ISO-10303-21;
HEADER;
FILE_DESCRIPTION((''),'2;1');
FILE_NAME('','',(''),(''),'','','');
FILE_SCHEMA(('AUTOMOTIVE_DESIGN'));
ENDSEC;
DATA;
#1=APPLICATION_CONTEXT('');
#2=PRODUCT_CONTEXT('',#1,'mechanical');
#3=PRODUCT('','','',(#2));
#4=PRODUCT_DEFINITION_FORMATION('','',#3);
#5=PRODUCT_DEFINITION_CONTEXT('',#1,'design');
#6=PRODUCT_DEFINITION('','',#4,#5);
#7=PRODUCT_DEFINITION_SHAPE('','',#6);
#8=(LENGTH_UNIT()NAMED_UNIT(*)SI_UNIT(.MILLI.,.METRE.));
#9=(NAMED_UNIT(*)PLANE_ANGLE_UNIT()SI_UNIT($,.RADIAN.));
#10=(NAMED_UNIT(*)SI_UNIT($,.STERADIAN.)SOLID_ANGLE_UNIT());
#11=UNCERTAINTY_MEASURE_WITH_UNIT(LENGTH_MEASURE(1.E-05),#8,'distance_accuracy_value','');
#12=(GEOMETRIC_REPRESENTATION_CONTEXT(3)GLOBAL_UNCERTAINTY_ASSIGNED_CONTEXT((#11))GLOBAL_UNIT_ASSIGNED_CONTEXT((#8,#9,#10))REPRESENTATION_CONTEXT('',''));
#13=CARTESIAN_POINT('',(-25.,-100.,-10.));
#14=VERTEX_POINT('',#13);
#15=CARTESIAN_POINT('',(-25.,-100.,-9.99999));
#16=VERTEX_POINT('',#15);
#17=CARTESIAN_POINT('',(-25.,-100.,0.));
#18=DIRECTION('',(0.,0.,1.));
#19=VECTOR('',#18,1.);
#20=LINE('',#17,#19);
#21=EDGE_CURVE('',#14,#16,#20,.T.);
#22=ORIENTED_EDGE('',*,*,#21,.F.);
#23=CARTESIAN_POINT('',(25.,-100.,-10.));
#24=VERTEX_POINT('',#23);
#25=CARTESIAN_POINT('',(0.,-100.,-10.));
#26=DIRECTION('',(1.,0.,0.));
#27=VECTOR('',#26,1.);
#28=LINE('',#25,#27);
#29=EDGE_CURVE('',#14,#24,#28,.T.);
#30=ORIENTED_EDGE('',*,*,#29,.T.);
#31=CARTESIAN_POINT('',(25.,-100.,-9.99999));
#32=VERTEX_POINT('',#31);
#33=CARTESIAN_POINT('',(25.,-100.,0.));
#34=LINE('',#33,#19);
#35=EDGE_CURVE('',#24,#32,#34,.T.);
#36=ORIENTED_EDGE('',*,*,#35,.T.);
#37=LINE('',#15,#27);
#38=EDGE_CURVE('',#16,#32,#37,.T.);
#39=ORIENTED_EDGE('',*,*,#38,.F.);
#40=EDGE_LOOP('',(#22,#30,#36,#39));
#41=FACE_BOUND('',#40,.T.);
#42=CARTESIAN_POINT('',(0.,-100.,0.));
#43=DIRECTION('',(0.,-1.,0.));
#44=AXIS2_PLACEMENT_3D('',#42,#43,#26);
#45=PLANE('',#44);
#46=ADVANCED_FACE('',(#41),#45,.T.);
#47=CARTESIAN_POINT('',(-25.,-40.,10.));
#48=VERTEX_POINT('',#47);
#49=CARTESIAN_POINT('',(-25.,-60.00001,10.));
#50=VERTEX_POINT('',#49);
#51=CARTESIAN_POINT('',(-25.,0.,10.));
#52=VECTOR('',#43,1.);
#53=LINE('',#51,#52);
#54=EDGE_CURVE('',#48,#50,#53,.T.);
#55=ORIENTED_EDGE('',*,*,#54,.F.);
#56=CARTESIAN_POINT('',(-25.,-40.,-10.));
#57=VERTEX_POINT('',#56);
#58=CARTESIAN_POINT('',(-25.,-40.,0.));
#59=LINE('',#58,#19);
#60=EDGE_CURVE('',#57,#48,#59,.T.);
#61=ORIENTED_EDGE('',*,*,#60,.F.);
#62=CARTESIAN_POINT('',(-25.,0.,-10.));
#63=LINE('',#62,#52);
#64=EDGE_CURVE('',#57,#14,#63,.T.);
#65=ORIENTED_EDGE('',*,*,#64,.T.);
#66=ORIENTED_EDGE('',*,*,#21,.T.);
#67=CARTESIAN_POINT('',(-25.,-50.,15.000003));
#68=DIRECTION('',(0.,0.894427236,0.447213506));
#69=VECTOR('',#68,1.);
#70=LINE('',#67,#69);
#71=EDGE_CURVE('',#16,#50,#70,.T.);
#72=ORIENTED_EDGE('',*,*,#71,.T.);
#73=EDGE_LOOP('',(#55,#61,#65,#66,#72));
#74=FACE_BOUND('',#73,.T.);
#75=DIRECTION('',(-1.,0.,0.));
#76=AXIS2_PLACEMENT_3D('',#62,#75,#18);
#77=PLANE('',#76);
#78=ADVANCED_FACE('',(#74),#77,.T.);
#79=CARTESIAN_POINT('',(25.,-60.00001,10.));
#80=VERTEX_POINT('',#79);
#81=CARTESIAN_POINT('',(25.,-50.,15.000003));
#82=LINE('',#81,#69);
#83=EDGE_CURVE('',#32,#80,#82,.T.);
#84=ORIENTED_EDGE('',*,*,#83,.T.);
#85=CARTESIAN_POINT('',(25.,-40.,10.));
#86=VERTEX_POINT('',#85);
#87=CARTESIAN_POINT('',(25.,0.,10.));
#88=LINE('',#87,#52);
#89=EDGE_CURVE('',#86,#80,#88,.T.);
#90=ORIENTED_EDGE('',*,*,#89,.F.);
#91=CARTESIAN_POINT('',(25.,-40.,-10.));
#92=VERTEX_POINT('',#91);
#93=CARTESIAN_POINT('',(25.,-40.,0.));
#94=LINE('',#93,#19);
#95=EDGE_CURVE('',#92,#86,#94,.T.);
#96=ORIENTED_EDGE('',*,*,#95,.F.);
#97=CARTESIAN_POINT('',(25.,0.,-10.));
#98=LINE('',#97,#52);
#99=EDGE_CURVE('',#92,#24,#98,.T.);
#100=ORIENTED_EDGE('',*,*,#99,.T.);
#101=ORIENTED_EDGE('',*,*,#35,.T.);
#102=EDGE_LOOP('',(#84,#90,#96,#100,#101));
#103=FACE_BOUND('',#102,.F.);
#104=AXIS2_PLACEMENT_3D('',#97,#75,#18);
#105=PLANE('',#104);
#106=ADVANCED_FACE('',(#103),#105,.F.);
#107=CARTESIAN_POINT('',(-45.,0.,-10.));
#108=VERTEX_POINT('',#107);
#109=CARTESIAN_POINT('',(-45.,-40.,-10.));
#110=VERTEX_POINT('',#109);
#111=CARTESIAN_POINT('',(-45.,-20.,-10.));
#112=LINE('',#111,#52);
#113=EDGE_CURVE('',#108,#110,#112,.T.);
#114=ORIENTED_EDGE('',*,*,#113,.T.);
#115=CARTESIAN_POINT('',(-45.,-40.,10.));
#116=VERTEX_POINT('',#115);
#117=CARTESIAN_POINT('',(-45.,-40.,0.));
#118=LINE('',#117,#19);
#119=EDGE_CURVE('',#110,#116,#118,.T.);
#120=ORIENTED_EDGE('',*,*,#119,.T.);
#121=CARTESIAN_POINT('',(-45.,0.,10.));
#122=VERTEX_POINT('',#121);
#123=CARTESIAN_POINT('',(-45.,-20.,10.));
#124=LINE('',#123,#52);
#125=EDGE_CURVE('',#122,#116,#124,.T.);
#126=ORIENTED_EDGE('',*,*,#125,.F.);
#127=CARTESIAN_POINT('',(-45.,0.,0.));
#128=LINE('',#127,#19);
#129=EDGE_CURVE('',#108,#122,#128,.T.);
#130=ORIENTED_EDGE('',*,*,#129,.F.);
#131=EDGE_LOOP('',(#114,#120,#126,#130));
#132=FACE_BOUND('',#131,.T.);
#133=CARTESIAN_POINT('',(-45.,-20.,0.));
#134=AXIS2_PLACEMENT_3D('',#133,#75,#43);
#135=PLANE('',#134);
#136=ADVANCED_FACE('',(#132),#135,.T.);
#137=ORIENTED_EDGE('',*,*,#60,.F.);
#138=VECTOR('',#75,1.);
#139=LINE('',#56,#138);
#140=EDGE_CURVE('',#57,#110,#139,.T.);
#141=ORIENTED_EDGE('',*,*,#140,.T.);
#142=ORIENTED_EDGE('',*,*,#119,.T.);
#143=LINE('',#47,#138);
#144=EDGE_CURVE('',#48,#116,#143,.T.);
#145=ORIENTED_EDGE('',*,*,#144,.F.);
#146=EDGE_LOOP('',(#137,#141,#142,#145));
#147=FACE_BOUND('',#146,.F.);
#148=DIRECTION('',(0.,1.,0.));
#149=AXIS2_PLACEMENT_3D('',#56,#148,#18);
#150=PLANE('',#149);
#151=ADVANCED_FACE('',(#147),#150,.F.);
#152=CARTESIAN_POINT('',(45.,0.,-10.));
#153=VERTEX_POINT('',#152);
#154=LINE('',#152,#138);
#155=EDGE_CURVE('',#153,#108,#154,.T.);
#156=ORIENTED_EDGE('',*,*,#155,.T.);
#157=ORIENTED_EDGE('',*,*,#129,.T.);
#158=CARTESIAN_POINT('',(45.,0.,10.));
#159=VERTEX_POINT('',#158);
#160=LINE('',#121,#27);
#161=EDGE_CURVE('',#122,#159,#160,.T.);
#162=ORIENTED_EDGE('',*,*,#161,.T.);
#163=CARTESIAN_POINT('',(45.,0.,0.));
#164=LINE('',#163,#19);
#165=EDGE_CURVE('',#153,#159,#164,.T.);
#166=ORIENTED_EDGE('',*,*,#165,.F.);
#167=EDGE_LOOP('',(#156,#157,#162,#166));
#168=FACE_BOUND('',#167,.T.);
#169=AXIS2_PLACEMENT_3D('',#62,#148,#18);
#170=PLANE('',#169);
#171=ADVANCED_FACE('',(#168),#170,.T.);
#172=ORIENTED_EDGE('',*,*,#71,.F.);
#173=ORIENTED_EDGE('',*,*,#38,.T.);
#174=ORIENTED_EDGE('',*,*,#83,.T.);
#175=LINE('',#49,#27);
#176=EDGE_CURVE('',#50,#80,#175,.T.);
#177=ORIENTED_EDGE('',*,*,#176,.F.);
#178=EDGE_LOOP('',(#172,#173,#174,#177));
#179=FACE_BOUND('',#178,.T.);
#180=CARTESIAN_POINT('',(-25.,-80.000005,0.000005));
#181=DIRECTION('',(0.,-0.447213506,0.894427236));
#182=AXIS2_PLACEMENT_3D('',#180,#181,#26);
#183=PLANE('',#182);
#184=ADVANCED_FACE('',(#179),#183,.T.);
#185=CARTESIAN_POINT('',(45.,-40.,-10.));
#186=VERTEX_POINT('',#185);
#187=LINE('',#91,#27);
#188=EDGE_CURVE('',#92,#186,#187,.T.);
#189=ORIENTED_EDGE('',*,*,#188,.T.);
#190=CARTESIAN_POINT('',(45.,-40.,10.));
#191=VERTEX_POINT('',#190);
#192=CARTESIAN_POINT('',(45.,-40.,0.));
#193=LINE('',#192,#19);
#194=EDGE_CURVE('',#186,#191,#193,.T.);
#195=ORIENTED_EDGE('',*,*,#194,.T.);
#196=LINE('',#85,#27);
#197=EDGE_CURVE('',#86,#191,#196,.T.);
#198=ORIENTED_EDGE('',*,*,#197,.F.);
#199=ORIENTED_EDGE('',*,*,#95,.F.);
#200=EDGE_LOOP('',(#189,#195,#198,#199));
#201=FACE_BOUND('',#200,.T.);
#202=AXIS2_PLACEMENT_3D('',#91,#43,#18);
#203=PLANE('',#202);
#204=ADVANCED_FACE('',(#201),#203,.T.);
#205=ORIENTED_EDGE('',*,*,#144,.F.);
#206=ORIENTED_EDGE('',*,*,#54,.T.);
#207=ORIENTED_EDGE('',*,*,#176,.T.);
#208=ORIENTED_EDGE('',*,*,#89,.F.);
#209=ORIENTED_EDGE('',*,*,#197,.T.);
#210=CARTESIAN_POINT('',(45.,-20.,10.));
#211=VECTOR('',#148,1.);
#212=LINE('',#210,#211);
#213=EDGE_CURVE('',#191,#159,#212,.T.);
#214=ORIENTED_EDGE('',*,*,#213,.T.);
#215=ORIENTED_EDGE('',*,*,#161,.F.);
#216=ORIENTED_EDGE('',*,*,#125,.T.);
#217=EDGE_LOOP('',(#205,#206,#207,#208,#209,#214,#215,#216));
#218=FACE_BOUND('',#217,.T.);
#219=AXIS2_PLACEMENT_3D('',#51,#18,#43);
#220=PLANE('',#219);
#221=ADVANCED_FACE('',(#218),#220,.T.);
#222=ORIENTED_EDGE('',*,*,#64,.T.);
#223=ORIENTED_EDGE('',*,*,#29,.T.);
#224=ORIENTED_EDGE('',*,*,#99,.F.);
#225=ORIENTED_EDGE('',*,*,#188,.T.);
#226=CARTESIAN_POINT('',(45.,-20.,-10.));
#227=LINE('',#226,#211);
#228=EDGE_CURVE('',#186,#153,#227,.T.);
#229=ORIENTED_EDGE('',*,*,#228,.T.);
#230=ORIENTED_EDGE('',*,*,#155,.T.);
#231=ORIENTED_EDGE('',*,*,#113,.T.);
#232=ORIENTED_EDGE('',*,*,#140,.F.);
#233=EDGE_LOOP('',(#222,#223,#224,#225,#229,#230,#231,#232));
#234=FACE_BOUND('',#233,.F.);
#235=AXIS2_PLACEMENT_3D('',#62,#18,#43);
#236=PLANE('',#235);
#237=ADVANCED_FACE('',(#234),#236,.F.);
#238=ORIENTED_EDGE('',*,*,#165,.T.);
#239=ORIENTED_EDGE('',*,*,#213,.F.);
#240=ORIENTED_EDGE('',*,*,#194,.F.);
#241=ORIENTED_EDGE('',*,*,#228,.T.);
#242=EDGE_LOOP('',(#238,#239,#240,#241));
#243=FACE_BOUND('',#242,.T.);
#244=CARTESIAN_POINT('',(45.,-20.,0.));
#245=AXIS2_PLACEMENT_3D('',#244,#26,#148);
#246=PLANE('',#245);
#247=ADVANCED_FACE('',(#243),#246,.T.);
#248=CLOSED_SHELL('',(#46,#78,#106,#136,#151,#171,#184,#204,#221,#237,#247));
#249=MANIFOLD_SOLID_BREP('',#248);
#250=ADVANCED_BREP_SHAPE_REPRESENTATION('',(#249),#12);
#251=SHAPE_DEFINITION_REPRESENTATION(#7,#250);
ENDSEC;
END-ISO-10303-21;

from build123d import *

# Parameters (mm, degrees)
F0_W     = 50
F0_H     = 20
F1_DEPTH = 100
F2_SIZE2 = 39.99999
F2_SIZE  = 19.99999
F3_W     = 40
F3_H     = 20
F4_DEPTH = 20
F5_W     = 40
F5_H     = 20
F6_DEPTH = 20


# Not quite as in the source:
# - a fillet or chamfer is up to 0.001 mm smaller than in the source, because OpenCascade refuses the exact size


with BuildPart() as f1:
    # F0 (on Front) → F1 (new body)
    with BuildSketch(Plane.XZ):
        Rectangle(F0_W, F0_H)
    extrude(amount=F1_DEPTH)

    # F2 (size 20 and 40 in the source; OpenCascade refuses exactly that, so slightly less here)
    f2_edges = [f1.edges().sort_by_distance(p)[0] for p in [
        (0, -100, 10),
    ]]
    f2_side = f1.faces().sort_by_distance((0, -100, 0))[0]
    chamfer(f2_edges, length=F2_SIZE, length2=F2_SIZE2, reference=f2_side)

    # F3 (on face) → F4 (join)
    with BuildSketch(Plane.YZ.offset(25)):
        with Locations((-20, 0)):
            Rectangle(F3_W, F3_H)
    extrude(amount=F4_DEPTH)

    # F5 (on face) → F6 (join)
    with BuildSketch(Plane(origin=(-25, 0, 0), x_dir=(0, -1, 0), z_dir=(-1, 0, 0))):
        with Locations((20, 0)):
            Rectangle(F5_W, F5_H)
    extrude(amount=F6_DEPTH)


solid = f1.part
